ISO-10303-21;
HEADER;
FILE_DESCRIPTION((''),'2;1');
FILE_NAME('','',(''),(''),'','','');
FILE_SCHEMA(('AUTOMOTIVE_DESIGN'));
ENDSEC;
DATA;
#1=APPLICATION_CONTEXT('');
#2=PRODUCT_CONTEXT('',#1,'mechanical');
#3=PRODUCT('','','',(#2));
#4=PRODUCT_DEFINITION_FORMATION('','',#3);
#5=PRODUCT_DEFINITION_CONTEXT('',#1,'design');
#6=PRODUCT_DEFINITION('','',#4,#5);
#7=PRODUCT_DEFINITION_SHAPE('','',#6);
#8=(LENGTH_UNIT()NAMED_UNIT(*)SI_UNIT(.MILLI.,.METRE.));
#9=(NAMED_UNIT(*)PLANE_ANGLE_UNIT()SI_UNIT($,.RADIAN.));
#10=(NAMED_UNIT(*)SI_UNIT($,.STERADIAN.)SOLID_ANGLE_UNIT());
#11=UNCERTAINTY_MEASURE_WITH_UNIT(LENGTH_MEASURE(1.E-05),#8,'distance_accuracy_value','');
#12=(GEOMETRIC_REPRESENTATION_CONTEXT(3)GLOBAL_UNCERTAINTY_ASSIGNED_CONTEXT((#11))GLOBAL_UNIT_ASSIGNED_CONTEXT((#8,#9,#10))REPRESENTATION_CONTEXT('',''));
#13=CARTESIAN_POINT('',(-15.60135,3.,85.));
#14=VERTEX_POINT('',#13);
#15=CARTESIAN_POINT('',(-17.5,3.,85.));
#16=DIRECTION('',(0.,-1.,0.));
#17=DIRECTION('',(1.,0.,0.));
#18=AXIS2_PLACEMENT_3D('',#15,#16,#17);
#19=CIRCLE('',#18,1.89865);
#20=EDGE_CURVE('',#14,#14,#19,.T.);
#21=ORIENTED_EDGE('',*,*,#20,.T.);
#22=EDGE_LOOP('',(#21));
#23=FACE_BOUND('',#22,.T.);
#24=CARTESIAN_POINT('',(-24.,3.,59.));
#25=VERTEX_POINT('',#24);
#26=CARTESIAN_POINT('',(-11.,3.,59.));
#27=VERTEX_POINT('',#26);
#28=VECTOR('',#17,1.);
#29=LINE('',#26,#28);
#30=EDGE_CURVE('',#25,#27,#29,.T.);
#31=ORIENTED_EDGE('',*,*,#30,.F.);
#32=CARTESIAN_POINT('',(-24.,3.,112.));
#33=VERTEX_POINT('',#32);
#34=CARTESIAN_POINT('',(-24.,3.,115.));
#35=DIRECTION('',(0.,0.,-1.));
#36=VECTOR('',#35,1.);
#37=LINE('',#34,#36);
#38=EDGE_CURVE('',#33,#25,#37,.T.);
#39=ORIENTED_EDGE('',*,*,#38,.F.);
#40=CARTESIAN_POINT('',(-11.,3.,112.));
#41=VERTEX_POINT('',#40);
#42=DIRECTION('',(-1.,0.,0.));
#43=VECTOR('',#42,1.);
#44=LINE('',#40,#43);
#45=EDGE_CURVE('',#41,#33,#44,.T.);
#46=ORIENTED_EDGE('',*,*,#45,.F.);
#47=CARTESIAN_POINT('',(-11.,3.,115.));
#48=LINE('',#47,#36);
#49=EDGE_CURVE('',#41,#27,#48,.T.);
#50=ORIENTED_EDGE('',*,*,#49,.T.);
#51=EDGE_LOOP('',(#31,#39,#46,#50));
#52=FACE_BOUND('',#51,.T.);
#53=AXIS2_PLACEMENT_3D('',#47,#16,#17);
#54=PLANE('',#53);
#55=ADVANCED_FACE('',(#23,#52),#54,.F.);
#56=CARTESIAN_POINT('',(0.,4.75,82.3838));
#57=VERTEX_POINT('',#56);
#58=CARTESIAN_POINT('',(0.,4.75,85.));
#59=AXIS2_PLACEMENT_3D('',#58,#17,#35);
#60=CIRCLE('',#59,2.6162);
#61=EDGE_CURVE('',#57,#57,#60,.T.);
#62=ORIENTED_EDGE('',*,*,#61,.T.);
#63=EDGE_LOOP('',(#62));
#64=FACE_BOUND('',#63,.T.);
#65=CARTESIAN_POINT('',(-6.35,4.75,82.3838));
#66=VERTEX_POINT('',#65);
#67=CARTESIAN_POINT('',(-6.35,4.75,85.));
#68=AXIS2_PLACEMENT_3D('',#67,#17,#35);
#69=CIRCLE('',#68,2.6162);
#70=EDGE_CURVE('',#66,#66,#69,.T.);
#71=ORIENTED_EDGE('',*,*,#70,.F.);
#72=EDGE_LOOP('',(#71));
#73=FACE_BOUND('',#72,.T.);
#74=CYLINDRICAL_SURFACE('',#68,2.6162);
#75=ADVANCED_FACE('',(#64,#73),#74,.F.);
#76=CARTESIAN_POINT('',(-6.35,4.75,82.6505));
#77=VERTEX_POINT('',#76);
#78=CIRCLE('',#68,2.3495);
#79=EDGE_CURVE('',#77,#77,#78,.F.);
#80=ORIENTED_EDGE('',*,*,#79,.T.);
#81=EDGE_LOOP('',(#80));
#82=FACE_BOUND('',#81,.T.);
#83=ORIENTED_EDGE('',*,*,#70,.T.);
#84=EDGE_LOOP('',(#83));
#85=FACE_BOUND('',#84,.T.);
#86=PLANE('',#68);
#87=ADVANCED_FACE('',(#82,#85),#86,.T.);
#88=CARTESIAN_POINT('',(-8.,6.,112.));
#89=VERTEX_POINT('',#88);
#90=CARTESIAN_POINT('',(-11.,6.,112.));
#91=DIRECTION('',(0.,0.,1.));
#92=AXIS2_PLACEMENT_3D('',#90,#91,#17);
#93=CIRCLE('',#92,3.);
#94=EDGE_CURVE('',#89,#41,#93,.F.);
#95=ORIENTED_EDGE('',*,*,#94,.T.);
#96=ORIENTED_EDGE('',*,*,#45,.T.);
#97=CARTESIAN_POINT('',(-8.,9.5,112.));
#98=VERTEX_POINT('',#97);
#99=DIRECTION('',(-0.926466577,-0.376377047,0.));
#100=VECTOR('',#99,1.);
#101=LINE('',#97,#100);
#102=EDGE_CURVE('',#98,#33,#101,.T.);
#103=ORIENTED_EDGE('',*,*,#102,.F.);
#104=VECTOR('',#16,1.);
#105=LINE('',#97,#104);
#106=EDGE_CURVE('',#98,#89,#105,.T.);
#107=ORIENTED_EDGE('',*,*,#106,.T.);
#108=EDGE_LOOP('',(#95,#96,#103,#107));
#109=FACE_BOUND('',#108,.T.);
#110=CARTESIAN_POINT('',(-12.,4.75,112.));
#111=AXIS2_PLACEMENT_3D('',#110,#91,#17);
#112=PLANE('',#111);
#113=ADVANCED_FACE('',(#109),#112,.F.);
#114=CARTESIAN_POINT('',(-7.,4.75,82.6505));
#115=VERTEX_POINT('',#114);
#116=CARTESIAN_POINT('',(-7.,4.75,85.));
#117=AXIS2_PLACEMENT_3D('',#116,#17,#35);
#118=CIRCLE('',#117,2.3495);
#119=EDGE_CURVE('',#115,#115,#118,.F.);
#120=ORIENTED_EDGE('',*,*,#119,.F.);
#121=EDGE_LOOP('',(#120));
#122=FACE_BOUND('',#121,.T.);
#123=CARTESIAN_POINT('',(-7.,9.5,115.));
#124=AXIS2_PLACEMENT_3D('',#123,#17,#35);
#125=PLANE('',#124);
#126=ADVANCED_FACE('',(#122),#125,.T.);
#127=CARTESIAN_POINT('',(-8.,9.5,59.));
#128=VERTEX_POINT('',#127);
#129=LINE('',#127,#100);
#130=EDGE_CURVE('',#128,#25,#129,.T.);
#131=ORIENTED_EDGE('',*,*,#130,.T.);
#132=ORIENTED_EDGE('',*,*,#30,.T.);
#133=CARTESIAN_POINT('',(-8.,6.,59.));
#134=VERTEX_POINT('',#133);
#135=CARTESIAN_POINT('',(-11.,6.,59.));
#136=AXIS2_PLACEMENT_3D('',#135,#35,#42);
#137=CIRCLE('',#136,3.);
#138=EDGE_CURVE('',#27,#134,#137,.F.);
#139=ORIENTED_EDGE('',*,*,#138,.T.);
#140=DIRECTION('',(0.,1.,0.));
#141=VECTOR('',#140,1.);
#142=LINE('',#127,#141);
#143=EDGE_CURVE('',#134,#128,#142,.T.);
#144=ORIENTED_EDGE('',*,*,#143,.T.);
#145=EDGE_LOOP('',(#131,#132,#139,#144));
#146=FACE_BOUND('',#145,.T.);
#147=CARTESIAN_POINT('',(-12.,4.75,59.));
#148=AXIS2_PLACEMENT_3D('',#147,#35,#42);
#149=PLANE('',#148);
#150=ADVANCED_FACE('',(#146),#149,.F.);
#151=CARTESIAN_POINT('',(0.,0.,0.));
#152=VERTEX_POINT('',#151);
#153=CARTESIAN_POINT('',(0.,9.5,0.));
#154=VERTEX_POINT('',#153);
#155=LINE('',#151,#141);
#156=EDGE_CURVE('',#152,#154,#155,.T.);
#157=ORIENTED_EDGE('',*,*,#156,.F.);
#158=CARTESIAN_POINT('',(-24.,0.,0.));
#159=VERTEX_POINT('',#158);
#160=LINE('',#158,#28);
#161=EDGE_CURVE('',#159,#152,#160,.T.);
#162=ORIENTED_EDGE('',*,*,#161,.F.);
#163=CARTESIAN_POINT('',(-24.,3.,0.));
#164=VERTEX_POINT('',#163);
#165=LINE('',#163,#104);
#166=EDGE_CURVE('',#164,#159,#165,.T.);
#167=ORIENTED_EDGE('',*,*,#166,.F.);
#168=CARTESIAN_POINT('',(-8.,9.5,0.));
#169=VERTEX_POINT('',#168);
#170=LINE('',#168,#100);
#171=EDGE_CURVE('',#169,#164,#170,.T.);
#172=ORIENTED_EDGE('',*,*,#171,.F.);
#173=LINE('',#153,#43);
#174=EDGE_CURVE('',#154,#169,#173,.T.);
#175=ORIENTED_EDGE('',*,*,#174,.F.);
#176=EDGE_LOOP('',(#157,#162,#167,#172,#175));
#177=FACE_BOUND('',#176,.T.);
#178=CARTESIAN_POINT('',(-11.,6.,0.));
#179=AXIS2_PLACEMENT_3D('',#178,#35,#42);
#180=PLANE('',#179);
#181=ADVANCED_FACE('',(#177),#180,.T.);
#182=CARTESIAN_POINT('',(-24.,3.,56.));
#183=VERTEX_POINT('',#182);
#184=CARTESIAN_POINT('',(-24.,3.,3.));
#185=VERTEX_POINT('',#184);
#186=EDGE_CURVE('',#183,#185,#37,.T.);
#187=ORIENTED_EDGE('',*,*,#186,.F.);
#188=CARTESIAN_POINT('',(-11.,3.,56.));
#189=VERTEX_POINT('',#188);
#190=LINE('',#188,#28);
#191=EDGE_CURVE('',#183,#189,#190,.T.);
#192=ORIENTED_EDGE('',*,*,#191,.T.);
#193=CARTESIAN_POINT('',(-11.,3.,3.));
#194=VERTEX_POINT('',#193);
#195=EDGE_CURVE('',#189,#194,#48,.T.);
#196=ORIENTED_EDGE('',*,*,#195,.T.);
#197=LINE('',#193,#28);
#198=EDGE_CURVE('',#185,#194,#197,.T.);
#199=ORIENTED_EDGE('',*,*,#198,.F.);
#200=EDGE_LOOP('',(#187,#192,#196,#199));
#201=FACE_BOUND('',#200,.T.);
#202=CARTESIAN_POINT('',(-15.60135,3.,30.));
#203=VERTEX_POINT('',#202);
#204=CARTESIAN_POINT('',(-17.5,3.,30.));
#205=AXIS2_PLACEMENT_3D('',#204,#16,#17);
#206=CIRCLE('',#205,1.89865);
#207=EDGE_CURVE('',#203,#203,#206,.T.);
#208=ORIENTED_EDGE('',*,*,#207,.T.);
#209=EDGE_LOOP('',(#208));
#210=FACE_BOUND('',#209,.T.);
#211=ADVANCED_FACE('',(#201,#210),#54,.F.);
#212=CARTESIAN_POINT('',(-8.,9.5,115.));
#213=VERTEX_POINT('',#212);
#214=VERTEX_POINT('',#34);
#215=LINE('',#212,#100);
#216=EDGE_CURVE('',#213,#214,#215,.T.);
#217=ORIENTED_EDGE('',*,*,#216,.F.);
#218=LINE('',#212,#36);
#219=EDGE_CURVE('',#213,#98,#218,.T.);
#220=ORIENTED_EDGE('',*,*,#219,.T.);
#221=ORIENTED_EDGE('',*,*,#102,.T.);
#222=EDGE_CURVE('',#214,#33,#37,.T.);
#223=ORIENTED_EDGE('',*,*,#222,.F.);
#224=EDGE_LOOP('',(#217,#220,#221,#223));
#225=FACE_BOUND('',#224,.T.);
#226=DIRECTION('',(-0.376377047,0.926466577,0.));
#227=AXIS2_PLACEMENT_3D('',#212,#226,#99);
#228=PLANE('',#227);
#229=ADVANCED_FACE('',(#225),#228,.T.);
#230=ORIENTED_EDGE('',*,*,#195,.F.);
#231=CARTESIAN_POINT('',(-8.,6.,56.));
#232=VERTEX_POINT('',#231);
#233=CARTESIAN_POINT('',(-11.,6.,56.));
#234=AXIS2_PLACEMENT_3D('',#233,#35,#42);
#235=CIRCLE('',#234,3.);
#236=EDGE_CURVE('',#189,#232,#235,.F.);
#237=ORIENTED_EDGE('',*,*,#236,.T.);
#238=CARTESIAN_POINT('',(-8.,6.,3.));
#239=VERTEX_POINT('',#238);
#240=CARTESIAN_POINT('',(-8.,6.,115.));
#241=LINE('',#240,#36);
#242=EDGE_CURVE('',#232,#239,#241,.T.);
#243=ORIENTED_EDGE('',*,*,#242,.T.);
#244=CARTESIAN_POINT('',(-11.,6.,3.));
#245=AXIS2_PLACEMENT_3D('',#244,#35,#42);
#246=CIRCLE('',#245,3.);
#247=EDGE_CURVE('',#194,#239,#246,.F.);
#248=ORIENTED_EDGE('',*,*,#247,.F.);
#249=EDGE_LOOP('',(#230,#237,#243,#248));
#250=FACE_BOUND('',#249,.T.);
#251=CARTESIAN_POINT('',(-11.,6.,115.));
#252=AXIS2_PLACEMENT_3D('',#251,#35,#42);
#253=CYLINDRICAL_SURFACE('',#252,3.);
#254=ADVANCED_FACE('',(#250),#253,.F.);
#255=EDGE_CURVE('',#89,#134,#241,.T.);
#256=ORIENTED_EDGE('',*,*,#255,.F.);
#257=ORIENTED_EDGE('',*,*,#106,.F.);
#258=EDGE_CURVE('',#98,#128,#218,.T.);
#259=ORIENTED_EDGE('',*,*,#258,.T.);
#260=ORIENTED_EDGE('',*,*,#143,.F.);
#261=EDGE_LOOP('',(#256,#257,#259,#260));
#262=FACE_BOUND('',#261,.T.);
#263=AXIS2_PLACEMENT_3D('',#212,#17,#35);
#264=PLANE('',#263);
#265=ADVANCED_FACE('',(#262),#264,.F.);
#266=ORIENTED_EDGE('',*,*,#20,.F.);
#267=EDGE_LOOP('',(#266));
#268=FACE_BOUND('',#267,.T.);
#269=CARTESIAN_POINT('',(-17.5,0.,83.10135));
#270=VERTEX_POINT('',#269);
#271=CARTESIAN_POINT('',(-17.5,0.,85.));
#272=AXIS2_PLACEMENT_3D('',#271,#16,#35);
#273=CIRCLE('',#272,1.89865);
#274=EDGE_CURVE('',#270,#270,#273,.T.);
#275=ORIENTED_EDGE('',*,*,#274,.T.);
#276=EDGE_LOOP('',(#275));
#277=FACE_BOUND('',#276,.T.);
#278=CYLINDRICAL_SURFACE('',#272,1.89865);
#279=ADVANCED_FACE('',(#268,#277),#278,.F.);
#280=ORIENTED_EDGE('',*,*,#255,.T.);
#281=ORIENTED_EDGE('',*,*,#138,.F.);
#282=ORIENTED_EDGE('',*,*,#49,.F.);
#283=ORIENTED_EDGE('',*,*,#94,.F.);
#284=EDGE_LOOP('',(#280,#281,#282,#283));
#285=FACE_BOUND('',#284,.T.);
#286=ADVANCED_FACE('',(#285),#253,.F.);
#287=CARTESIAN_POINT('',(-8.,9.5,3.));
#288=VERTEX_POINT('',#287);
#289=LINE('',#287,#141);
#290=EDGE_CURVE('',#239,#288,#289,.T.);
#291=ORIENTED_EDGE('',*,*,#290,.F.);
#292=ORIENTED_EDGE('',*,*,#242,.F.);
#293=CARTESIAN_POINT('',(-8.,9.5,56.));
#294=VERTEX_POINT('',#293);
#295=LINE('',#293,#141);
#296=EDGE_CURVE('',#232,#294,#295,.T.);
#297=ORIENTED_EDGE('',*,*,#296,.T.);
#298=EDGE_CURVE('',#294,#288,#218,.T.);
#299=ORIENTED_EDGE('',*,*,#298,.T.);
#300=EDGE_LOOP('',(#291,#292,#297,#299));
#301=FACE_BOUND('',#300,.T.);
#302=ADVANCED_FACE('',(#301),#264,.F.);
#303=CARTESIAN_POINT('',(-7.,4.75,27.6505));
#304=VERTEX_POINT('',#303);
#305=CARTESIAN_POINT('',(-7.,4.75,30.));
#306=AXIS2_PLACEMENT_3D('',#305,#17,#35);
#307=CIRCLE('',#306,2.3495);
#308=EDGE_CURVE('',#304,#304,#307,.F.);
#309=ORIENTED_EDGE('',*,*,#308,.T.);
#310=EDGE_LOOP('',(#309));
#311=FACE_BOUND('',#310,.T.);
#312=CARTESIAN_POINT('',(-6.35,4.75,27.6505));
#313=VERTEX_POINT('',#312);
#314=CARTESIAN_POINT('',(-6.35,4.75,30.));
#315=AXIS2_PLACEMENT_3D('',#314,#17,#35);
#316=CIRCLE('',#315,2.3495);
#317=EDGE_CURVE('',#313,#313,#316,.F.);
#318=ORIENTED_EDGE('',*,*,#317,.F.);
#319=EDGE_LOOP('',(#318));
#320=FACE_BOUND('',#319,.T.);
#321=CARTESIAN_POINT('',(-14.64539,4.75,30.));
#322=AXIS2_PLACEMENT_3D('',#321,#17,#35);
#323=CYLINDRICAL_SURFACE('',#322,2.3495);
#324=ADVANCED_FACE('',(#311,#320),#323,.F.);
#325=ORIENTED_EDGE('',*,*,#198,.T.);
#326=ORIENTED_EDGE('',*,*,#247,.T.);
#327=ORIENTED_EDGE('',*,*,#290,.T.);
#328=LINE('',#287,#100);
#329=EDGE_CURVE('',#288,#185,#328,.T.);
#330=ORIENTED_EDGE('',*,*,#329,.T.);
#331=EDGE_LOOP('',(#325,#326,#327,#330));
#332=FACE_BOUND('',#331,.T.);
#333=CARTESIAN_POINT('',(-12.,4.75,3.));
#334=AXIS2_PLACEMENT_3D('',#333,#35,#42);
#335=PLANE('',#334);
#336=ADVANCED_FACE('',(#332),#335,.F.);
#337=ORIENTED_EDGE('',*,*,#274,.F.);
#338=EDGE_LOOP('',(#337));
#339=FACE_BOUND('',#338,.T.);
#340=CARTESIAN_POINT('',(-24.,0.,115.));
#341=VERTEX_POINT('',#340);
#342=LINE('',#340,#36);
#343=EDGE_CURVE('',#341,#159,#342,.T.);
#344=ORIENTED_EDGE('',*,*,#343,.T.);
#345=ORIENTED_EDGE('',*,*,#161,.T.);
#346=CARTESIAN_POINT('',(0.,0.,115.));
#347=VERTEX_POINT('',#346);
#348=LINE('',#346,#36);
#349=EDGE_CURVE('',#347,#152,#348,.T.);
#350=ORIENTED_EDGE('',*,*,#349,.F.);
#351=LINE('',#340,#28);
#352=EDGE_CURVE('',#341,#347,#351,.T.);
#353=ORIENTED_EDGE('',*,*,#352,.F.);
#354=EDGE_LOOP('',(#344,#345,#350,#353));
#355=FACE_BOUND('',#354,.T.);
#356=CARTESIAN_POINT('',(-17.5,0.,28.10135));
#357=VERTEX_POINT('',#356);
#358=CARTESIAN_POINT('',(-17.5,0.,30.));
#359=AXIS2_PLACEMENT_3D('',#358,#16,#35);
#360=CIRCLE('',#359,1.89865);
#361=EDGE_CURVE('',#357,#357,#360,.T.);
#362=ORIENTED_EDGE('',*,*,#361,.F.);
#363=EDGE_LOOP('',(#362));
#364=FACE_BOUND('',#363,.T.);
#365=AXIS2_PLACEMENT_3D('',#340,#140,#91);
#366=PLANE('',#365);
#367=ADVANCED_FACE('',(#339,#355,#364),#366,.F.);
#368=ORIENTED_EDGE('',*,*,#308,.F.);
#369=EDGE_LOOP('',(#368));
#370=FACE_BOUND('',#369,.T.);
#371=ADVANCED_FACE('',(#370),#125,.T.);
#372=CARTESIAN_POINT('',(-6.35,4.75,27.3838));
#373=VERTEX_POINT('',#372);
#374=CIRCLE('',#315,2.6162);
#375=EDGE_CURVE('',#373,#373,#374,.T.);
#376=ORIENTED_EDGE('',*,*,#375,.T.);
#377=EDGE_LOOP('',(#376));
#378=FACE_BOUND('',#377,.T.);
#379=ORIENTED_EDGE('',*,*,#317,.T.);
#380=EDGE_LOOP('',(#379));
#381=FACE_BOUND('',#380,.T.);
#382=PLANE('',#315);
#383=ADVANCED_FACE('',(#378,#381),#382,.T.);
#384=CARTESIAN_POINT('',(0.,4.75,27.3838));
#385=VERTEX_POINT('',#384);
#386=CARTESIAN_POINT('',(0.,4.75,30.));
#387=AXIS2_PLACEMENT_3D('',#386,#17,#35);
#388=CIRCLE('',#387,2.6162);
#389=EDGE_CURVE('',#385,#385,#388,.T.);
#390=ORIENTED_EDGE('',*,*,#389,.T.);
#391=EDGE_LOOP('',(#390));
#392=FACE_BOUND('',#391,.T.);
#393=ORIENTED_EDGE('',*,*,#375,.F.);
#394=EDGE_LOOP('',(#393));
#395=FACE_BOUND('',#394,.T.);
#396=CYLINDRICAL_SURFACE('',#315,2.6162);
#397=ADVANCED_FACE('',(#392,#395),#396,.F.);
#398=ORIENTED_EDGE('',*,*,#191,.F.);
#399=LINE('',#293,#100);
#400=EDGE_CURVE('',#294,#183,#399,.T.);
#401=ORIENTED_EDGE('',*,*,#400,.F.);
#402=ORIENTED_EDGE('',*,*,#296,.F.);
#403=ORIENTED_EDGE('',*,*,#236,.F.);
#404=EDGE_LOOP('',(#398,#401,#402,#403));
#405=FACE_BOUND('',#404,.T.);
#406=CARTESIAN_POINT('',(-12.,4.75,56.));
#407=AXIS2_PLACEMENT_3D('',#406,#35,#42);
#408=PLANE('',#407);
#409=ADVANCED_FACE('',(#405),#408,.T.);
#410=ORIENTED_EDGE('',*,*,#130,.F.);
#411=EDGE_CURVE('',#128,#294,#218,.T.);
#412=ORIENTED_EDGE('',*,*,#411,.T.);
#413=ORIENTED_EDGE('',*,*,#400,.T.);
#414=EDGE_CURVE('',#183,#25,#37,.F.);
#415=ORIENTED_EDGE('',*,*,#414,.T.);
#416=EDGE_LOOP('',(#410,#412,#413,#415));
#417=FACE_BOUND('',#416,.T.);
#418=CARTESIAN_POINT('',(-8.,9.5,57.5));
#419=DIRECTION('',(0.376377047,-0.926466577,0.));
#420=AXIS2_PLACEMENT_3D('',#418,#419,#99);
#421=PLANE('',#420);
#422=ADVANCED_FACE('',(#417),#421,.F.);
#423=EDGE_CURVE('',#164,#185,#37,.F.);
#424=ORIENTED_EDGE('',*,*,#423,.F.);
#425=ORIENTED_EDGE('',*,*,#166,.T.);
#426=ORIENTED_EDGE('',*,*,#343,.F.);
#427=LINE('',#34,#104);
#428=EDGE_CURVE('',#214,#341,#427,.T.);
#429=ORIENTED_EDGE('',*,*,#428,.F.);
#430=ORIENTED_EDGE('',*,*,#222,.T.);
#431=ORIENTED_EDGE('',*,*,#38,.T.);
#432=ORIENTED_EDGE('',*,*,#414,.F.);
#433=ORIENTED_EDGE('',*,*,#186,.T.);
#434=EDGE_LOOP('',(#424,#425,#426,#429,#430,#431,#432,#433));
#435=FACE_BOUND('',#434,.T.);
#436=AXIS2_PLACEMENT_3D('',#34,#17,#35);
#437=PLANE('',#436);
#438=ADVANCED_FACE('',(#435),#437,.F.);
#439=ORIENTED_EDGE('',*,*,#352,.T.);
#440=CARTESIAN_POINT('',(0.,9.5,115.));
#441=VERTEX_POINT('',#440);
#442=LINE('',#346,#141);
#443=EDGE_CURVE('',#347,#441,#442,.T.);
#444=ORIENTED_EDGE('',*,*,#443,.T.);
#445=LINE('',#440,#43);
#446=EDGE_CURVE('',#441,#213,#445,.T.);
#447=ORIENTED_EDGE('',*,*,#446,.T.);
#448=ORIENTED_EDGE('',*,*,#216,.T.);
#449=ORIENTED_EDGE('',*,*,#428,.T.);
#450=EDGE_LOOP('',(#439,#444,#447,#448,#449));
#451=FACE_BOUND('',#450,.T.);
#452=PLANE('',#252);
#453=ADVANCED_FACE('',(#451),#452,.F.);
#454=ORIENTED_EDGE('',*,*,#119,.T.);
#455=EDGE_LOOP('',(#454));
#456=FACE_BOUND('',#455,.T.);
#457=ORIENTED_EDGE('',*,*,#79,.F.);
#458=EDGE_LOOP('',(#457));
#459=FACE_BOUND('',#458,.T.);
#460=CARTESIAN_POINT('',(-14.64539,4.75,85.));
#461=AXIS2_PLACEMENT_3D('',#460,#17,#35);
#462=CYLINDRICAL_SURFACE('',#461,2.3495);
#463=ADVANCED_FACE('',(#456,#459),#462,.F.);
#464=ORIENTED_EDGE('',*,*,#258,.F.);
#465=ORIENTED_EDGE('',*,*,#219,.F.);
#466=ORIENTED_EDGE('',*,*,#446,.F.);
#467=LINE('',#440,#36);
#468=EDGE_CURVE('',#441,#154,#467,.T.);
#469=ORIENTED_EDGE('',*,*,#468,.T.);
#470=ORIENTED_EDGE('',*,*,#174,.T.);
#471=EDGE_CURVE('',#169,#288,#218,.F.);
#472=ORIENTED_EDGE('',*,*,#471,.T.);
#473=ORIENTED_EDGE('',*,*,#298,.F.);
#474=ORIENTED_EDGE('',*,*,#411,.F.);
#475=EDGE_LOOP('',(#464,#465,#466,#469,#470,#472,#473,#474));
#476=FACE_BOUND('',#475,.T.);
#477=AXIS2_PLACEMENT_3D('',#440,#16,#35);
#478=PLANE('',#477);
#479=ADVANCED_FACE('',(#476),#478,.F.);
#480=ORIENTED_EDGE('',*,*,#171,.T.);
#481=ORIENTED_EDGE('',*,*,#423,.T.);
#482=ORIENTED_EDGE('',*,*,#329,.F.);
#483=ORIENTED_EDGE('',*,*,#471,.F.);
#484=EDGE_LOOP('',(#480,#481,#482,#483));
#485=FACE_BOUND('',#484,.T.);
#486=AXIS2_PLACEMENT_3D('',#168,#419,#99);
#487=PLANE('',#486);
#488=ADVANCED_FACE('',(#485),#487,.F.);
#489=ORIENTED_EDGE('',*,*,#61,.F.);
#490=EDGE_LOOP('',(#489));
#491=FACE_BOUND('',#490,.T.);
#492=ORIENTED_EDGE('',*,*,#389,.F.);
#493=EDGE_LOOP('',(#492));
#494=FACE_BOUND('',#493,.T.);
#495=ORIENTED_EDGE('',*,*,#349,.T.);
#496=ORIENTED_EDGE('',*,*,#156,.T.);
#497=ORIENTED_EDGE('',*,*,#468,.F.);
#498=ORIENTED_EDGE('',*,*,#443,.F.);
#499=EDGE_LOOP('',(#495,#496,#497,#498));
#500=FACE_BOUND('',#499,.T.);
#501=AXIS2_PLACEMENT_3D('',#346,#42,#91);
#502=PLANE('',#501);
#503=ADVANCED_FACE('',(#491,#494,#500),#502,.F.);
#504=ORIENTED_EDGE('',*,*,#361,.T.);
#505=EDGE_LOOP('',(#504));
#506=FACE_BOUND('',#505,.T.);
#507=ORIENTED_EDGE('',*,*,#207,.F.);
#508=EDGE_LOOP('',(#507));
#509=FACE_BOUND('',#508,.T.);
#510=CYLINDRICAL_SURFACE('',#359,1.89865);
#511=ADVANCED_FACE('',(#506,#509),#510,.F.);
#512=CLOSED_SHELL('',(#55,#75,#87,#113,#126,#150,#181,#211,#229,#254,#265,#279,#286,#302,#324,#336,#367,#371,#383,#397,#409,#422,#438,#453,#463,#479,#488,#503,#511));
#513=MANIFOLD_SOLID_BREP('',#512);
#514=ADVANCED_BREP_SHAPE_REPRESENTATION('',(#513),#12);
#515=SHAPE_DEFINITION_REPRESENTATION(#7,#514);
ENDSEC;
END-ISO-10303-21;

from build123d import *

# Parameters (mm, degrees)
BOSS_EXTRUDE1_DEPTH   = 115
RIB3_REACH            = 65.028
SKETCH4_WALL_W        = 145.325459352
SKETCH4_WALL_H        = 3
RIB4_START            = -3
RIB4_DEPTH            = 3
F_6_CLEARANCE_HOLE1_D = 3.7973
SKETCH6_R             = 2.3495
CUT_EXTRUDE1_DEPTH    = 7
SKETCH12_R            = 2.6162
CUT_EXTRUDE2_DEPTH    = 6.35


# Read off the part's stored shape, not the designer's step: Rib4
with BuildPart() as part:
    # Sketch1 → Boss-Extrude1 (new body)
    with BuildSketch(Plane.XY):
        with BuildLine():
            Line((0, 0), (0, 9.5))
            Line((0, 9.5), (-8, 9.5))
            Line((-8, 9.5), (-8, 6))
            ThreePointArc((-8, 6), (-8.878679656, 3.878679656), (-11, 3))
            Line((-11, 3), (-24, 3))
            Line((-24, 3), (-24, 0))
            Line((-24, 0), (0, 0))
        make_face()
    extrude(amount=BOSS_EXTRUDE1_DEPTH)

    # Sketch4 wall → Rib3 (add, up to next)
    with BuildSketch(Plane(origin=(-16, 6.25, 57.5), x_dir=(-0.926466577122, -0.376377046956, 0), z_dir=(-0.376377046956, 0.926466577122, 0)), mode=Mode.PRIVATE) as rib3_sk1:
        Rectangle(SKETCH4_WALL_W, SKETCH4_WALL_H)
    rib3_tool1 = extrude(rib3_sk1.sketch, amount=-RIB3_REACH, mode=Mode.PRIVATE) - part.part
    add(rib3_tool1.solids().sort_by_distance((-16, 6.25, 57.5))[0])

    # Rib4 outline → Rib4 (add)
    with BuildSketch(Plane(origin=(0, 0, 0), x_dir=(-1, 0, 0), z_dir=(0, 0, -1)).offset(RIB4_START)):
        with BuildLine():
            Line((24, 3), (8, 9.5))
            Line((8, 9.5), (8, 6))
            ThreePointArc((8, 6), (8.878679656, 3.878679656), (11, 3))
            Line((11, 3), (24, 3))
        make_face()
    rib4 = extrude(amount=RIB4_DEPTH)

    # Mirror1: Rib4 across plane
    add(rib4.mirror(Plane(origin=(0, 0, 57.5), x_dir=(1, 0, 0), z_dir=(0, 0, -1))))

    # #6 Clearance Hole1 (through all)
    with Locations(Plane(origin=(0, 0, 0), x_dir=(-1, 0, 0), z_dir=(0, -1, 0))):
        with Locations((17.5, -30), (17.5, -85)):
            Hole(F_6_CLEARANCE_HOLE1_D / 2)

    # Sketch6 → Cut-Extrude1 (cut)
    with BuildSketch(Plane(origin=(0, 0, 0), x_dir=(0, 0, -1), z_dir=(1, 0, 0))):
        with Locations((-85, 4.75)):
            Circle(SKETCH6_R)
        with Locations((-30, 4.75)):
            Circle(SKETCH6_R)
    extrude(amount=-CUT_EXTRUDE1_DEPTH, mode=Mode.SUBTRACT)

    # Sketch12 → Cut-Extrude2 (cut)
    with BuildSketch(Plane(origin=(0, 0, 0), x_dir=(0, 0, -1), z_dir=(1, 0, 0))):
        with Locations((-85, 4.75)):
            Circle(SKETCH12_R)
        with Locations((-30, 4.75)):
            Circle(SKETCH12_R)
    extrude(amount=-CUT_EXTRUDE2_DEPTH, mode=Mode.SUBTRACT)


solid = part.part
